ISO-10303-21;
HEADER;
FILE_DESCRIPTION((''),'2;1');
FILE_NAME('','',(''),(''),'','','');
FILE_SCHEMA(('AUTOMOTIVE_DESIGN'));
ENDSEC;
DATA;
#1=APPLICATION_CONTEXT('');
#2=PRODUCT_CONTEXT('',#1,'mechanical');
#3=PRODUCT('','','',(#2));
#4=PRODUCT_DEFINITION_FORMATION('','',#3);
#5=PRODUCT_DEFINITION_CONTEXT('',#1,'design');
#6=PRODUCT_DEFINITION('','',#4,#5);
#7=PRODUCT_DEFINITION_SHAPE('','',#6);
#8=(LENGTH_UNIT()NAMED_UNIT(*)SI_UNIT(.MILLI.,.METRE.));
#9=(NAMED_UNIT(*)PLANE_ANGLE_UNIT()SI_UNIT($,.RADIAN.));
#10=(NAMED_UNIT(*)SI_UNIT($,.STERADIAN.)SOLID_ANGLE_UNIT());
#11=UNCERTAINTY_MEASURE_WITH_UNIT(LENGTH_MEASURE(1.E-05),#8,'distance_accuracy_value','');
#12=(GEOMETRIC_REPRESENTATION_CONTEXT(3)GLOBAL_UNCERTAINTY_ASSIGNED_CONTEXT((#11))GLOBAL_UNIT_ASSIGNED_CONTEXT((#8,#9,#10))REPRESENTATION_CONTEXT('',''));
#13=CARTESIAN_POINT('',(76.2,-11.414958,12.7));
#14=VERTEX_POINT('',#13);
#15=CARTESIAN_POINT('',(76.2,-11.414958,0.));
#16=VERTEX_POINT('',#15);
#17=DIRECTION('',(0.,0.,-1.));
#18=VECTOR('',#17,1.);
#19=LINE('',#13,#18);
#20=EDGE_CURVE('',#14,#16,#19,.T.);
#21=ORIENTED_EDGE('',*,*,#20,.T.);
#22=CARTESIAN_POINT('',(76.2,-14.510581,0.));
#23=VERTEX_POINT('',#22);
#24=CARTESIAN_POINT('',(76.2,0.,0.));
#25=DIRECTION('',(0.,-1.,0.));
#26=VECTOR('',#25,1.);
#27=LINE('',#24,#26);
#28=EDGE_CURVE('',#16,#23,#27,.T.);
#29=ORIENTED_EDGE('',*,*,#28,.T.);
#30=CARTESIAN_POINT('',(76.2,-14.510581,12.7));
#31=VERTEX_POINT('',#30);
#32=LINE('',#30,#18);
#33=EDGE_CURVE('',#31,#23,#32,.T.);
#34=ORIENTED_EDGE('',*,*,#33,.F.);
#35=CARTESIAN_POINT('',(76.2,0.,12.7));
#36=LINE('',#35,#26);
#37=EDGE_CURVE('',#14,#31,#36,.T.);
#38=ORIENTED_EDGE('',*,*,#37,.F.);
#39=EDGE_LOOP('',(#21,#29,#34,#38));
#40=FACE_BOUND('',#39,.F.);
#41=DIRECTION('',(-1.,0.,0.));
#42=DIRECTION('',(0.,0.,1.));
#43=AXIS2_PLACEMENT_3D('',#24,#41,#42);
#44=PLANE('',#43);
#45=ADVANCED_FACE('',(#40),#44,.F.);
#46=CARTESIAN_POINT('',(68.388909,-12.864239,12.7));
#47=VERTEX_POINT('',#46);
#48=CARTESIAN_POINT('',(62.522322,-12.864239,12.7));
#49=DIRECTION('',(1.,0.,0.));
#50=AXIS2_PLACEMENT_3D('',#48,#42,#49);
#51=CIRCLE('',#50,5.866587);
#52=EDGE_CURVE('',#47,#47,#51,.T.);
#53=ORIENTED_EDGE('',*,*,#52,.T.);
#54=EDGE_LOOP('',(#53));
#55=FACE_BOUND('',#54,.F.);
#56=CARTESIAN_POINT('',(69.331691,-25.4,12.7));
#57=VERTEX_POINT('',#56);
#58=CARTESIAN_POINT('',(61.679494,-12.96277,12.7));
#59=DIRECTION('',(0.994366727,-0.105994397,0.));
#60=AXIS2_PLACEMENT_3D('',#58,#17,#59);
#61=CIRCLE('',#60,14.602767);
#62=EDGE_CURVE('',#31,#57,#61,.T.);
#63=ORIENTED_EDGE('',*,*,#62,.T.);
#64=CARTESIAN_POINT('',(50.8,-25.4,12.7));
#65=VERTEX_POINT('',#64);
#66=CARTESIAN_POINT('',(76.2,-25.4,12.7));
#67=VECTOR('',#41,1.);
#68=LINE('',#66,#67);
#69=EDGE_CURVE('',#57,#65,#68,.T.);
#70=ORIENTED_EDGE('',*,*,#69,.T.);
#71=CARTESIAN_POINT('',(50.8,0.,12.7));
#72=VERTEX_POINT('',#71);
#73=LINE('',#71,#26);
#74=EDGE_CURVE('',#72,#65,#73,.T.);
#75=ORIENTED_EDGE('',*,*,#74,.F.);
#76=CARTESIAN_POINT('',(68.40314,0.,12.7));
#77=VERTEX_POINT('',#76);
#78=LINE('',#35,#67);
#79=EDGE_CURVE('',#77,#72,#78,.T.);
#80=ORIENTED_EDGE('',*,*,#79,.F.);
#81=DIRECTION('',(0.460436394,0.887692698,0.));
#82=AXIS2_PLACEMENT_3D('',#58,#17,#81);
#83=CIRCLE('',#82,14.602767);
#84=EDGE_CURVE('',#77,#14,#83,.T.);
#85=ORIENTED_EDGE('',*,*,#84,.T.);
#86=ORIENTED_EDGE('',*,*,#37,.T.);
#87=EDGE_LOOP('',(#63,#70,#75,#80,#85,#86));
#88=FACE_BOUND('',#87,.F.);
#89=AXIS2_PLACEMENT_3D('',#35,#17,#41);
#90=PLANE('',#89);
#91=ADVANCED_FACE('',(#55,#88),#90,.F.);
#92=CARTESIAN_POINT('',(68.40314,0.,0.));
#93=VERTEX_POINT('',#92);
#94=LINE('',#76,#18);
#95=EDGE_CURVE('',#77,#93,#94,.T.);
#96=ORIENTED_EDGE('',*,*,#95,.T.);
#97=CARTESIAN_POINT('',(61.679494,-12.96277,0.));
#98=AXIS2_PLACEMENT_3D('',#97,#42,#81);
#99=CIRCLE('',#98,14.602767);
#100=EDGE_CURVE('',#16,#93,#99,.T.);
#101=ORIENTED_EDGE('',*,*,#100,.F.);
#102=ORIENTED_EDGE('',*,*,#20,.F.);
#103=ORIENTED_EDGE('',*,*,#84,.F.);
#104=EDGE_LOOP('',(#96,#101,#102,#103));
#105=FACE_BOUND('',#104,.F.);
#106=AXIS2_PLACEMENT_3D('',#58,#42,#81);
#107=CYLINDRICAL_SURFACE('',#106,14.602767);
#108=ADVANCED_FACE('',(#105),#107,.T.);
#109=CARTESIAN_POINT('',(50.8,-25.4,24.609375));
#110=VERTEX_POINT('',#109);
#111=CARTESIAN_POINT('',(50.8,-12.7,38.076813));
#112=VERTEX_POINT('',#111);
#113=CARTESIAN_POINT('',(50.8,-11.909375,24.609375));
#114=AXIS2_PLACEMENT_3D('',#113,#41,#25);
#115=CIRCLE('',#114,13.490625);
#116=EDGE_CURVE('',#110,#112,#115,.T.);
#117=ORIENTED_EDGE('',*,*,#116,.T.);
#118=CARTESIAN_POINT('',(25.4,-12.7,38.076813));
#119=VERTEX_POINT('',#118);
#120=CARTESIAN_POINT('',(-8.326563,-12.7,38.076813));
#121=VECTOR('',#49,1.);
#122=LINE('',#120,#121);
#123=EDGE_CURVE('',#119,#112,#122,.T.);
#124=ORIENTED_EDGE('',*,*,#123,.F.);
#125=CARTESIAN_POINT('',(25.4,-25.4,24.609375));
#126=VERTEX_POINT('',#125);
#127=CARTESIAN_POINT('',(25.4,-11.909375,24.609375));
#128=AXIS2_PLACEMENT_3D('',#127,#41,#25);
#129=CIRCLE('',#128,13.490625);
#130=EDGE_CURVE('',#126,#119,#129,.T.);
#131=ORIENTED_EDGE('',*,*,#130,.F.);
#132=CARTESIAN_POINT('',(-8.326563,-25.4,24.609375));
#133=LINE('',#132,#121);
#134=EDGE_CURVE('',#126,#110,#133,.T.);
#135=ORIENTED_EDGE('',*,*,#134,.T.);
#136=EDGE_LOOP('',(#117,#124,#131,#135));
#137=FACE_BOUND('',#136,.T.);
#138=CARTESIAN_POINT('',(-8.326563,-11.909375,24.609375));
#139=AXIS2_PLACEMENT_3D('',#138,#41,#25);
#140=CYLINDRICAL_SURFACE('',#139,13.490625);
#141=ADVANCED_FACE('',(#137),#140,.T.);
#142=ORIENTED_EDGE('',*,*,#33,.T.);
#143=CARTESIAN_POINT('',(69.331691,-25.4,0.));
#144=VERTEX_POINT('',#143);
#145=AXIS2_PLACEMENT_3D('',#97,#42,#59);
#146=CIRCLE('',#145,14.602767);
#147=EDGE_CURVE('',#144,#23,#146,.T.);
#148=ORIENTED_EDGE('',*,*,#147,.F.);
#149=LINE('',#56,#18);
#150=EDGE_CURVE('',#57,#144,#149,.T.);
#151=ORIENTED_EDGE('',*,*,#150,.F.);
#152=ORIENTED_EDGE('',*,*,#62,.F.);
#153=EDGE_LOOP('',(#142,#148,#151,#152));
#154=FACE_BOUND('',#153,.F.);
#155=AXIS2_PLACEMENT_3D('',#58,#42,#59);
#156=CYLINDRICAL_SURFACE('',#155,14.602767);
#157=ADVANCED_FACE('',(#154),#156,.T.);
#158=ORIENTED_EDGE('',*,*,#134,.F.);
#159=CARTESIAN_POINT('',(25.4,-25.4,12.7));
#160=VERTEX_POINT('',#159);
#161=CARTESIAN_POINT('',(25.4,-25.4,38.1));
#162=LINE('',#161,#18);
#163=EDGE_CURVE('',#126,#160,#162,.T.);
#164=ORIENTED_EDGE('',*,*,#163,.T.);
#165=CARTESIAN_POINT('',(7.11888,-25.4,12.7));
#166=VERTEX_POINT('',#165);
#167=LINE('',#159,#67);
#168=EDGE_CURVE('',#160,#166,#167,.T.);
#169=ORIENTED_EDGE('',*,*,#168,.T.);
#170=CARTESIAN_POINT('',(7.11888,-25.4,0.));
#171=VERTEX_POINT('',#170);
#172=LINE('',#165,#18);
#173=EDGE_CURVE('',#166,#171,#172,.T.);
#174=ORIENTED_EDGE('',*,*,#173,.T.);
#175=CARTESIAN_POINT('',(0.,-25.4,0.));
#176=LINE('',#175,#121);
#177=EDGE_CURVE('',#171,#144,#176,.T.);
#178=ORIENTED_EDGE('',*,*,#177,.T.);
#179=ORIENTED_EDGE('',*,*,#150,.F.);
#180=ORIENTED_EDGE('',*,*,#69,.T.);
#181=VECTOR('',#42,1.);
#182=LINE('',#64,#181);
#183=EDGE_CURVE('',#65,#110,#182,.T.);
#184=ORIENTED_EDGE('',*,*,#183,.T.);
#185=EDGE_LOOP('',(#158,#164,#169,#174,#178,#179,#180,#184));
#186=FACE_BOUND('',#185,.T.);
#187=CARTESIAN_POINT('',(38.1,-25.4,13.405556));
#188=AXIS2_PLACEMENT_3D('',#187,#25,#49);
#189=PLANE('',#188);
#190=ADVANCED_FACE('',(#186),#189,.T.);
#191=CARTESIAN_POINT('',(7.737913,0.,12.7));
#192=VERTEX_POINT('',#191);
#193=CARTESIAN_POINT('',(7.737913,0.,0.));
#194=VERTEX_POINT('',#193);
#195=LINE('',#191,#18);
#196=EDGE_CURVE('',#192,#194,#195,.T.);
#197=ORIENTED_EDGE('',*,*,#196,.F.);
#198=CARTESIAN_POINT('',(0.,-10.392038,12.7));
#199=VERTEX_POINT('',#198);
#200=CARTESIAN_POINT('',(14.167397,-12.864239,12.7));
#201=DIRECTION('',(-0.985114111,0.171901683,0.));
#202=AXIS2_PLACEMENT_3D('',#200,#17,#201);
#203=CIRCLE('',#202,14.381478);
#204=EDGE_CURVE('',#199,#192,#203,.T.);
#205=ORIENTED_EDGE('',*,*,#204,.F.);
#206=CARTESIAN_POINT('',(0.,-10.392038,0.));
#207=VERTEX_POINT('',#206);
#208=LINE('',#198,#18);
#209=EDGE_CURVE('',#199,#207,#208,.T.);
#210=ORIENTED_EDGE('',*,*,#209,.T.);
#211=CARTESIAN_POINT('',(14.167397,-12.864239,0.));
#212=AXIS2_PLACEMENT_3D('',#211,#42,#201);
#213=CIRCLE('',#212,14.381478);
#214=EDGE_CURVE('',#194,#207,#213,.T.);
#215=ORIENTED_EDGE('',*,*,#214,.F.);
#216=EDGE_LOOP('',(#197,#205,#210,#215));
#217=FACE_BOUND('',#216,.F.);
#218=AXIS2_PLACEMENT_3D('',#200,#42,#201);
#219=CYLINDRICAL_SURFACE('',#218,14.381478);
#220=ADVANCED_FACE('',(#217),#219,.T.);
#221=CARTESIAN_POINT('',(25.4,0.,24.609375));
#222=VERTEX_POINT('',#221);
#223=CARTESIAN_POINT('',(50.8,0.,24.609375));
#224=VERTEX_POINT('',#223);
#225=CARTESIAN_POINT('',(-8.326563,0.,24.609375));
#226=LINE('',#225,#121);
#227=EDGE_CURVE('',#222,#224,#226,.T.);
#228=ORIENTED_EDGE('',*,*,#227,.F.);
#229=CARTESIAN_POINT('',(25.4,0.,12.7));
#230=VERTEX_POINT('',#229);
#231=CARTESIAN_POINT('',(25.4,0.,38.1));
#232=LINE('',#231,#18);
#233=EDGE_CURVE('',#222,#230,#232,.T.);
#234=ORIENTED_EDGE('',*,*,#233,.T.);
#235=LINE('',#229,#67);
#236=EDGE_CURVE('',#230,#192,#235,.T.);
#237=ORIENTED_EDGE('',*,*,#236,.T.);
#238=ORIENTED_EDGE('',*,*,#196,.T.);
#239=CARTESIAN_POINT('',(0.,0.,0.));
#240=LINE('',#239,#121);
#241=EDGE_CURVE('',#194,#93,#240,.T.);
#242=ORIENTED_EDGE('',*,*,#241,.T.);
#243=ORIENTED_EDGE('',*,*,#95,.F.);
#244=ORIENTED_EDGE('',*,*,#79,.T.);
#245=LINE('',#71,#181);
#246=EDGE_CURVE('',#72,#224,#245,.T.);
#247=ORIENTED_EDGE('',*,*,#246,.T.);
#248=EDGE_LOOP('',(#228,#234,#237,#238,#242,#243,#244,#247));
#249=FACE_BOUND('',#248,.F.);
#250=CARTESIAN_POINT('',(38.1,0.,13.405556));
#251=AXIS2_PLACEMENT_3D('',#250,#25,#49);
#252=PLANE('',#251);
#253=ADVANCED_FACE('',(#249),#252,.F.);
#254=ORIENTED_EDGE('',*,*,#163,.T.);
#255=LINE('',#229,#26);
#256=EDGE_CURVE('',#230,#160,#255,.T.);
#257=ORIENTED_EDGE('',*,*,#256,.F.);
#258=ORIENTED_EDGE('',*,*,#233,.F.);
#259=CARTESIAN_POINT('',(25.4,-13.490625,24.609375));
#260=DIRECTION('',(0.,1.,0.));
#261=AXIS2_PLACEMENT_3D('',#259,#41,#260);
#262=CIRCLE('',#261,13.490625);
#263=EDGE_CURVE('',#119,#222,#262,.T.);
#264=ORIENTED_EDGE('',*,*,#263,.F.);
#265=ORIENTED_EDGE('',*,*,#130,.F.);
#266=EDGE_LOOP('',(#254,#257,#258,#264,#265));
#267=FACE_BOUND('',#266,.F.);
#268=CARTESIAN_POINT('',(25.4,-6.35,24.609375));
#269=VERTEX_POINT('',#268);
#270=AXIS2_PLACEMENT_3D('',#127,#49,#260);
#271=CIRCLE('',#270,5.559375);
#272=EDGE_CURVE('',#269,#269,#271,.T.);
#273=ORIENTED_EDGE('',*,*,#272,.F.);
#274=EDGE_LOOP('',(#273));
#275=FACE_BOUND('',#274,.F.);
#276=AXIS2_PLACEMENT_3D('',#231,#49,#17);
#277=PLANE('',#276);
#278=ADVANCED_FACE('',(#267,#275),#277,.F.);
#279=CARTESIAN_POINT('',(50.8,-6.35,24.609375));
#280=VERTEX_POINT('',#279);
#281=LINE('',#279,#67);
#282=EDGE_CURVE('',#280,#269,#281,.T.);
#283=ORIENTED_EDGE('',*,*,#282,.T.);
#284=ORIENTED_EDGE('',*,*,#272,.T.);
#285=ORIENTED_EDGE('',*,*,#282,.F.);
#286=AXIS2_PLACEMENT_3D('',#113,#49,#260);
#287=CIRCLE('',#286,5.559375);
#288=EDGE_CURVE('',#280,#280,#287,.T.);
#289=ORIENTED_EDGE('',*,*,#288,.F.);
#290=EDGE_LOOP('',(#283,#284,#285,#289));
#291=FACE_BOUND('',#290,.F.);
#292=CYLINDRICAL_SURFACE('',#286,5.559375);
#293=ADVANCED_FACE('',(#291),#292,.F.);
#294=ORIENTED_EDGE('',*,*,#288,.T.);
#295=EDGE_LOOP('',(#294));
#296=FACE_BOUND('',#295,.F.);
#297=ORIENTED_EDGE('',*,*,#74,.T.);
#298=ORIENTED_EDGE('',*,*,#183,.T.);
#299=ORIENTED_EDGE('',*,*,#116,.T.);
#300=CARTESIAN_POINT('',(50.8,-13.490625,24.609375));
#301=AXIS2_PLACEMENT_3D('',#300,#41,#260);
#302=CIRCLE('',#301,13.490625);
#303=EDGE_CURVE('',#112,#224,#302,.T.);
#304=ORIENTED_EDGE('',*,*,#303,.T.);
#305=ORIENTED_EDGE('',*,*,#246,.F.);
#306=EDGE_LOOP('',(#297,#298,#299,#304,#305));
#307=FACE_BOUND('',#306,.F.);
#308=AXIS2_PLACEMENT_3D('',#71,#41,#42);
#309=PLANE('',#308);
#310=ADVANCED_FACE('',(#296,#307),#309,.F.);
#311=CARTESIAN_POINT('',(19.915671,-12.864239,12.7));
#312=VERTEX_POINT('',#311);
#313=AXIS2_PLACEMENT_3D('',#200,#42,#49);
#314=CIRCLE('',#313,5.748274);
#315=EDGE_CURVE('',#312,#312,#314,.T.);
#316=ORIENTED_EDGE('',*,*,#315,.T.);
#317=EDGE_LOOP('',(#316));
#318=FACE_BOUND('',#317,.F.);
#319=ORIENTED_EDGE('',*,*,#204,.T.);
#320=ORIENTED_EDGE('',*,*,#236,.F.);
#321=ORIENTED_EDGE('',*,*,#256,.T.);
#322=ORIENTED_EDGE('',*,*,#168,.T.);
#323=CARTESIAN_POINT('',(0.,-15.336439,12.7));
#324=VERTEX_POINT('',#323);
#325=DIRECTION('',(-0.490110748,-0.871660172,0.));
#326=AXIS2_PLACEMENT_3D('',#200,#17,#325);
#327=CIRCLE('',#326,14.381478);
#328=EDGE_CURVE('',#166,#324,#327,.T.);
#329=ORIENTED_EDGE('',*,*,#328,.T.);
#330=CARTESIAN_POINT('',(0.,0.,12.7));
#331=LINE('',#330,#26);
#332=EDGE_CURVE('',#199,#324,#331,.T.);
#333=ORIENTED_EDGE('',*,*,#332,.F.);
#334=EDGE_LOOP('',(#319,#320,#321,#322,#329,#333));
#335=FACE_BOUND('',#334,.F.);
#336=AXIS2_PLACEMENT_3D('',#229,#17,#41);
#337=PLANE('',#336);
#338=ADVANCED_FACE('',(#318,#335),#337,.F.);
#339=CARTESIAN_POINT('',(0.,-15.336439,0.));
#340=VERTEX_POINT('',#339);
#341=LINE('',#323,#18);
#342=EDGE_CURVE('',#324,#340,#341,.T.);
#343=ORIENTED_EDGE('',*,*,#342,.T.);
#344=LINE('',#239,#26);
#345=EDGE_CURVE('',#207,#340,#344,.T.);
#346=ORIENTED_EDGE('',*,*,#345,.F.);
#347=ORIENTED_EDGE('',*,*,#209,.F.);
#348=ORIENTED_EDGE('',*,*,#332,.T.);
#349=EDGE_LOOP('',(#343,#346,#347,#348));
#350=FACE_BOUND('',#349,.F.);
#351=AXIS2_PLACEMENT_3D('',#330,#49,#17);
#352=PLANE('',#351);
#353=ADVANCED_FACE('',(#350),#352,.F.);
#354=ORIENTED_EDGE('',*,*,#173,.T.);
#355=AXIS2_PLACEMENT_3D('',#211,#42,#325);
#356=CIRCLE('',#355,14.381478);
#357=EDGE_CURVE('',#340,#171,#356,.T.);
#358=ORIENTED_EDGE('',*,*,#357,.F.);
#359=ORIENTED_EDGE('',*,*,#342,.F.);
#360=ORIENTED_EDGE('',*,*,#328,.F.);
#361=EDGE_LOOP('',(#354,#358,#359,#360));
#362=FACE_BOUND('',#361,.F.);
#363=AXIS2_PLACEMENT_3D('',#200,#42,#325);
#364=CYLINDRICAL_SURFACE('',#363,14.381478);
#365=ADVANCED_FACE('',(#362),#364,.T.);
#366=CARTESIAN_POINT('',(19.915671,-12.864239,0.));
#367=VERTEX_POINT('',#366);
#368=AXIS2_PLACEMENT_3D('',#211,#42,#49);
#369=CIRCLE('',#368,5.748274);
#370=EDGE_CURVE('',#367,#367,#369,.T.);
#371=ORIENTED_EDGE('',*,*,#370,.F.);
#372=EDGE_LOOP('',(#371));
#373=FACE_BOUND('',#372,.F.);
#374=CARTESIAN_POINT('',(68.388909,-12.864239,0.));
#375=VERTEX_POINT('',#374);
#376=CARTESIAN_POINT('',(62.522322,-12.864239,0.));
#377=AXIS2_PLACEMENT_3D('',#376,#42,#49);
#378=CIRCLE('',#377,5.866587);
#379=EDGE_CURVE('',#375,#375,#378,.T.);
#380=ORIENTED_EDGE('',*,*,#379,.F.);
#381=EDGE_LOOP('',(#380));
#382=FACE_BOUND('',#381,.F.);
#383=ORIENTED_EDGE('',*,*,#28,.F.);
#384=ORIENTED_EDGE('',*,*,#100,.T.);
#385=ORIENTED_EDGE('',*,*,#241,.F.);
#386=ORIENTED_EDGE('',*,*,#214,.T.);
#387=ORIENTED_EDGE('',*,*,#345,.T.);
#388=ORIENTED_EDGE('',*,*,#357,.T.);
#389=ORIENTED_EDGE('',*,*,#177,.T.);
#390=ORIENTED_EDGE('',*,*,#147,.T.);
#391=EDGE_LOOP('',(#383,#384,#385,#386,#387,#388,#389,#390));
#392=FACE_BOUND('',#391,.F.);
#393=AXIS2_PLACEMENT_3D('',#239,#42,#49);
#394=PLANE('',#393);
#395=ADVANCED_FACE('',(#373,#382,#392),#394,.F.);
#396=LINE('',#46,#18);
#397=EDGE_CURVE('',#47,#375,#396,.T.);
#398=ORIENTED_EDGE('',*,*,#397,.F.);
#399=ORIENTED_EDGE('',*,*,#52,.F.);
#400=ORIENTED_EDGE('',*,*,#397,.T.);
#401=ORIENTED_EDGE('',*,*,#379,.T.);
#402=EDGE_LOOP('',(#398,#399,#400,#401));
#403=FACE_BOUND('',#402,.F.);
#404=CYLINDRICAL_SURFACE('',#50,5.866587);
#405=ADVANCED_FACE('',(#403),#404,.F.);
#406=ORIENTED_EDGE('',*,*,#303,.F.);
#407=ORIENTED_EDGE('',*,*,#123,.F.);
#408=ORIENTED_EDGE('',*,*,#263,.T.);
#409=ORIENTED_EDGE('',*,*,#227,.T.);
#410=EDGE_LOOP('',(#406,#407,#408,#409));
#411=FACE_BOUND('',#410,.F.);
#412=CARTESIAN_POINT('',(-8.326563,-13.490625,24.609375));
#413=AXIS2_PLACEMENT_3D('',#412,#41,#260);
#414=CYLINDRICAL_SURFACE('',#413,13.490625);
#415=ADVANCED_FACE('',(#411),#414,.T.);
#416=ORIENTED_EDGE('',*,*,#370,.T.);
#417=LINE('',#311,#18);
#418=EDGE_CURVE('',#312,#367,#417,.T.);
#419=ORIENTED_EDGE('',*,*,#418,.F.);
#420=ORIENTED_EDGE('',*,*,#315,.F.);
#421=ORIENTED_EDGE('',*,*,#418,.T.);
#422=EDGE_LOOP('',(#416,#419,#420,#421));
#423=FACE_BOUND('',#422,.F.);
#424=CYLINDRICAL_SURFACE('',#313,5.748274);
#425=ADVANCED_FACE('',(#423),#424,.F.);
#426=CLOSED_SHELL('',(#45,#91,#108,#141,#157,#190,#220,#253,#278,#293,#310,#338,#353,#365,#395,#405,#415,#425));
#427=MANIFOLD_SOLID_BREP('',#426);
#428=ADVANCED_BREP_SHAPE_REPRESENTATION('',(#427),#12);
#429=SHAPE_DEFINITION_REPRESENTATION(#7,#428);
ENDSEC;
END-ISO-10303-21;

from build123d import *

# Parameters (mm, degrees)
F1_DEPTH    = 25.4
F3_DEPTH    = 25.4
F5_DEPTH    = 25.4
F6_T1_DEPTH = 92.8531269327
F7_R        = 5.5593746135
F8_DEPTH    = 25.4
F9_R        = 5.8665873172
F10_DEPTH   = 25.4
F9_R_2      = 5.7482740473
F11_DEPTH   = 25.4


# Not quite as in the source:
# - a fillet or chamfer that OpenCascade refuses, or shapes differently, is made with other operations: its cross-section is extruded or revolved along the edge and cut away or added


with BuildPart() as f1:
    # F0 (on Front) → F1 (new body)
    with BuildSketch(Plane.XZ):
        Polygon((25.4, 12.7), (0, 12.7), (0, 0), (76.2, 0), (76.2, 12.7), (50.8, 12.7), (50.8, 38.1), (25.4, 38.1), align=None)
    extrude(amount=F1_DEPTH)

    # F2 (on face) → F3 (cut)
    with BuildSketch(Plane.XY.offset(12.7)):
        with BuildLine():
            ThreePointArc((0, -10.3920384811), (2.632385222, -4.2752682762), (7.7379127033, 0))
            Line((7.7379127033, 0), (0, 0))
            Line((0, 0), (0, -10.3920384811))
        make_face()
        with BuildLine():
            ThreePointArc((7.1188798174, -25.4), (2.4265465189, -21.1696188601), (0, -15.3364389071))
            Line((0, -15.3364389071), (0, -25.4))
            Line((0, -25.4), (7.1188798174, -25.4))
        make_face()
    extrude(amount=-F3_DEPTH, mode=Mode.SUBTRACT)

    # F4 (on face) → F5 (cut)
    with BuildSketch(Plane.XY.offset(12.7)):
        with BuildLine():
            ThreePointArc((68.4031397104, 0), (73.7378443896, -4.7264477616), (76.2, -11.4149582241))
            Line((76.2, -11.4149582241), (76.2, 0))
            Line((76.2, 0), (68.4031397104, 0))
        make_face()
        with BuildLine():
            ThreePointArc((76.2, -14.5105812124), (74.030690178, -20.7530692397), (69.3316906691, -25.4))
            Line((69.3316906691, -25.4), (76.2, -25.4))
            Line((76.2, -25.4), (76.2, -14.5105812124))
        make_face()
    extrude(amount=-F5_DEPTH, mode=Mode.SUBTRACT)

    # F6: fillet of radius 13.4906253865 on 2 edges, made by hand

    # F6_s2 → F6_t1 (cut)
    with BuildSketch(Plane.YZ.offset(-8.3265634664)):
        with BuildLine():
            ThreePointArc((-25.4, 24.6093746135), (-21.4486873067, 34.1486873067), (-11.9093746135, 38.1))
            Line((-11.9093746135, 38.1), (-25.4, 38.1))
            Line((-25.4, 38.1), (-25.4, 24.6093746135))
        make_face()
        with BuildLine():
            ThreePointArc((0, 24.6093746135), (-3.9513126933, 34.1486873067), (-13.4906253865, 38.1))
            Line((-13.4906253865, 38.1), (0, 38.1))
            Line((0, 38.1), (0, 24.6093746135))
        make_face()
    extrude(amount=F6_T1_DEPTH, mode=Mode.SUBTRACT)

    # F7 (on face) → F8 (cut)
    with BuildSketch(Plane.YZ.offset(50.8)):
        with Locations((-11.9093746135, 24.6093746135)):
            Circle(F7_R)
    extrude(amount=-F8_DEPTH, mode=Mode.SUBTRACT)

    # F9 (on face) → F10 (cut)
    with BuildSketch(Plane.XY.offset(12.7)):
        with Locations((62.5223219395, -12.8642386941)):
            Circle(F9_R)
    extrude(amount=-F10_DEPTH, mode=Mode.SUBTRACT)

    # F9 (on face) → F11 (cut)
    with BuildSketch(Plane.XY.offset(12.7)):
        with Locations((14.1673966027, -12.8642386941)):
            Circle(F9_R_2)
    extrude(amount=-F11_DEPTH, mode=Mode.SUBTRACT)


solid = f1.part
